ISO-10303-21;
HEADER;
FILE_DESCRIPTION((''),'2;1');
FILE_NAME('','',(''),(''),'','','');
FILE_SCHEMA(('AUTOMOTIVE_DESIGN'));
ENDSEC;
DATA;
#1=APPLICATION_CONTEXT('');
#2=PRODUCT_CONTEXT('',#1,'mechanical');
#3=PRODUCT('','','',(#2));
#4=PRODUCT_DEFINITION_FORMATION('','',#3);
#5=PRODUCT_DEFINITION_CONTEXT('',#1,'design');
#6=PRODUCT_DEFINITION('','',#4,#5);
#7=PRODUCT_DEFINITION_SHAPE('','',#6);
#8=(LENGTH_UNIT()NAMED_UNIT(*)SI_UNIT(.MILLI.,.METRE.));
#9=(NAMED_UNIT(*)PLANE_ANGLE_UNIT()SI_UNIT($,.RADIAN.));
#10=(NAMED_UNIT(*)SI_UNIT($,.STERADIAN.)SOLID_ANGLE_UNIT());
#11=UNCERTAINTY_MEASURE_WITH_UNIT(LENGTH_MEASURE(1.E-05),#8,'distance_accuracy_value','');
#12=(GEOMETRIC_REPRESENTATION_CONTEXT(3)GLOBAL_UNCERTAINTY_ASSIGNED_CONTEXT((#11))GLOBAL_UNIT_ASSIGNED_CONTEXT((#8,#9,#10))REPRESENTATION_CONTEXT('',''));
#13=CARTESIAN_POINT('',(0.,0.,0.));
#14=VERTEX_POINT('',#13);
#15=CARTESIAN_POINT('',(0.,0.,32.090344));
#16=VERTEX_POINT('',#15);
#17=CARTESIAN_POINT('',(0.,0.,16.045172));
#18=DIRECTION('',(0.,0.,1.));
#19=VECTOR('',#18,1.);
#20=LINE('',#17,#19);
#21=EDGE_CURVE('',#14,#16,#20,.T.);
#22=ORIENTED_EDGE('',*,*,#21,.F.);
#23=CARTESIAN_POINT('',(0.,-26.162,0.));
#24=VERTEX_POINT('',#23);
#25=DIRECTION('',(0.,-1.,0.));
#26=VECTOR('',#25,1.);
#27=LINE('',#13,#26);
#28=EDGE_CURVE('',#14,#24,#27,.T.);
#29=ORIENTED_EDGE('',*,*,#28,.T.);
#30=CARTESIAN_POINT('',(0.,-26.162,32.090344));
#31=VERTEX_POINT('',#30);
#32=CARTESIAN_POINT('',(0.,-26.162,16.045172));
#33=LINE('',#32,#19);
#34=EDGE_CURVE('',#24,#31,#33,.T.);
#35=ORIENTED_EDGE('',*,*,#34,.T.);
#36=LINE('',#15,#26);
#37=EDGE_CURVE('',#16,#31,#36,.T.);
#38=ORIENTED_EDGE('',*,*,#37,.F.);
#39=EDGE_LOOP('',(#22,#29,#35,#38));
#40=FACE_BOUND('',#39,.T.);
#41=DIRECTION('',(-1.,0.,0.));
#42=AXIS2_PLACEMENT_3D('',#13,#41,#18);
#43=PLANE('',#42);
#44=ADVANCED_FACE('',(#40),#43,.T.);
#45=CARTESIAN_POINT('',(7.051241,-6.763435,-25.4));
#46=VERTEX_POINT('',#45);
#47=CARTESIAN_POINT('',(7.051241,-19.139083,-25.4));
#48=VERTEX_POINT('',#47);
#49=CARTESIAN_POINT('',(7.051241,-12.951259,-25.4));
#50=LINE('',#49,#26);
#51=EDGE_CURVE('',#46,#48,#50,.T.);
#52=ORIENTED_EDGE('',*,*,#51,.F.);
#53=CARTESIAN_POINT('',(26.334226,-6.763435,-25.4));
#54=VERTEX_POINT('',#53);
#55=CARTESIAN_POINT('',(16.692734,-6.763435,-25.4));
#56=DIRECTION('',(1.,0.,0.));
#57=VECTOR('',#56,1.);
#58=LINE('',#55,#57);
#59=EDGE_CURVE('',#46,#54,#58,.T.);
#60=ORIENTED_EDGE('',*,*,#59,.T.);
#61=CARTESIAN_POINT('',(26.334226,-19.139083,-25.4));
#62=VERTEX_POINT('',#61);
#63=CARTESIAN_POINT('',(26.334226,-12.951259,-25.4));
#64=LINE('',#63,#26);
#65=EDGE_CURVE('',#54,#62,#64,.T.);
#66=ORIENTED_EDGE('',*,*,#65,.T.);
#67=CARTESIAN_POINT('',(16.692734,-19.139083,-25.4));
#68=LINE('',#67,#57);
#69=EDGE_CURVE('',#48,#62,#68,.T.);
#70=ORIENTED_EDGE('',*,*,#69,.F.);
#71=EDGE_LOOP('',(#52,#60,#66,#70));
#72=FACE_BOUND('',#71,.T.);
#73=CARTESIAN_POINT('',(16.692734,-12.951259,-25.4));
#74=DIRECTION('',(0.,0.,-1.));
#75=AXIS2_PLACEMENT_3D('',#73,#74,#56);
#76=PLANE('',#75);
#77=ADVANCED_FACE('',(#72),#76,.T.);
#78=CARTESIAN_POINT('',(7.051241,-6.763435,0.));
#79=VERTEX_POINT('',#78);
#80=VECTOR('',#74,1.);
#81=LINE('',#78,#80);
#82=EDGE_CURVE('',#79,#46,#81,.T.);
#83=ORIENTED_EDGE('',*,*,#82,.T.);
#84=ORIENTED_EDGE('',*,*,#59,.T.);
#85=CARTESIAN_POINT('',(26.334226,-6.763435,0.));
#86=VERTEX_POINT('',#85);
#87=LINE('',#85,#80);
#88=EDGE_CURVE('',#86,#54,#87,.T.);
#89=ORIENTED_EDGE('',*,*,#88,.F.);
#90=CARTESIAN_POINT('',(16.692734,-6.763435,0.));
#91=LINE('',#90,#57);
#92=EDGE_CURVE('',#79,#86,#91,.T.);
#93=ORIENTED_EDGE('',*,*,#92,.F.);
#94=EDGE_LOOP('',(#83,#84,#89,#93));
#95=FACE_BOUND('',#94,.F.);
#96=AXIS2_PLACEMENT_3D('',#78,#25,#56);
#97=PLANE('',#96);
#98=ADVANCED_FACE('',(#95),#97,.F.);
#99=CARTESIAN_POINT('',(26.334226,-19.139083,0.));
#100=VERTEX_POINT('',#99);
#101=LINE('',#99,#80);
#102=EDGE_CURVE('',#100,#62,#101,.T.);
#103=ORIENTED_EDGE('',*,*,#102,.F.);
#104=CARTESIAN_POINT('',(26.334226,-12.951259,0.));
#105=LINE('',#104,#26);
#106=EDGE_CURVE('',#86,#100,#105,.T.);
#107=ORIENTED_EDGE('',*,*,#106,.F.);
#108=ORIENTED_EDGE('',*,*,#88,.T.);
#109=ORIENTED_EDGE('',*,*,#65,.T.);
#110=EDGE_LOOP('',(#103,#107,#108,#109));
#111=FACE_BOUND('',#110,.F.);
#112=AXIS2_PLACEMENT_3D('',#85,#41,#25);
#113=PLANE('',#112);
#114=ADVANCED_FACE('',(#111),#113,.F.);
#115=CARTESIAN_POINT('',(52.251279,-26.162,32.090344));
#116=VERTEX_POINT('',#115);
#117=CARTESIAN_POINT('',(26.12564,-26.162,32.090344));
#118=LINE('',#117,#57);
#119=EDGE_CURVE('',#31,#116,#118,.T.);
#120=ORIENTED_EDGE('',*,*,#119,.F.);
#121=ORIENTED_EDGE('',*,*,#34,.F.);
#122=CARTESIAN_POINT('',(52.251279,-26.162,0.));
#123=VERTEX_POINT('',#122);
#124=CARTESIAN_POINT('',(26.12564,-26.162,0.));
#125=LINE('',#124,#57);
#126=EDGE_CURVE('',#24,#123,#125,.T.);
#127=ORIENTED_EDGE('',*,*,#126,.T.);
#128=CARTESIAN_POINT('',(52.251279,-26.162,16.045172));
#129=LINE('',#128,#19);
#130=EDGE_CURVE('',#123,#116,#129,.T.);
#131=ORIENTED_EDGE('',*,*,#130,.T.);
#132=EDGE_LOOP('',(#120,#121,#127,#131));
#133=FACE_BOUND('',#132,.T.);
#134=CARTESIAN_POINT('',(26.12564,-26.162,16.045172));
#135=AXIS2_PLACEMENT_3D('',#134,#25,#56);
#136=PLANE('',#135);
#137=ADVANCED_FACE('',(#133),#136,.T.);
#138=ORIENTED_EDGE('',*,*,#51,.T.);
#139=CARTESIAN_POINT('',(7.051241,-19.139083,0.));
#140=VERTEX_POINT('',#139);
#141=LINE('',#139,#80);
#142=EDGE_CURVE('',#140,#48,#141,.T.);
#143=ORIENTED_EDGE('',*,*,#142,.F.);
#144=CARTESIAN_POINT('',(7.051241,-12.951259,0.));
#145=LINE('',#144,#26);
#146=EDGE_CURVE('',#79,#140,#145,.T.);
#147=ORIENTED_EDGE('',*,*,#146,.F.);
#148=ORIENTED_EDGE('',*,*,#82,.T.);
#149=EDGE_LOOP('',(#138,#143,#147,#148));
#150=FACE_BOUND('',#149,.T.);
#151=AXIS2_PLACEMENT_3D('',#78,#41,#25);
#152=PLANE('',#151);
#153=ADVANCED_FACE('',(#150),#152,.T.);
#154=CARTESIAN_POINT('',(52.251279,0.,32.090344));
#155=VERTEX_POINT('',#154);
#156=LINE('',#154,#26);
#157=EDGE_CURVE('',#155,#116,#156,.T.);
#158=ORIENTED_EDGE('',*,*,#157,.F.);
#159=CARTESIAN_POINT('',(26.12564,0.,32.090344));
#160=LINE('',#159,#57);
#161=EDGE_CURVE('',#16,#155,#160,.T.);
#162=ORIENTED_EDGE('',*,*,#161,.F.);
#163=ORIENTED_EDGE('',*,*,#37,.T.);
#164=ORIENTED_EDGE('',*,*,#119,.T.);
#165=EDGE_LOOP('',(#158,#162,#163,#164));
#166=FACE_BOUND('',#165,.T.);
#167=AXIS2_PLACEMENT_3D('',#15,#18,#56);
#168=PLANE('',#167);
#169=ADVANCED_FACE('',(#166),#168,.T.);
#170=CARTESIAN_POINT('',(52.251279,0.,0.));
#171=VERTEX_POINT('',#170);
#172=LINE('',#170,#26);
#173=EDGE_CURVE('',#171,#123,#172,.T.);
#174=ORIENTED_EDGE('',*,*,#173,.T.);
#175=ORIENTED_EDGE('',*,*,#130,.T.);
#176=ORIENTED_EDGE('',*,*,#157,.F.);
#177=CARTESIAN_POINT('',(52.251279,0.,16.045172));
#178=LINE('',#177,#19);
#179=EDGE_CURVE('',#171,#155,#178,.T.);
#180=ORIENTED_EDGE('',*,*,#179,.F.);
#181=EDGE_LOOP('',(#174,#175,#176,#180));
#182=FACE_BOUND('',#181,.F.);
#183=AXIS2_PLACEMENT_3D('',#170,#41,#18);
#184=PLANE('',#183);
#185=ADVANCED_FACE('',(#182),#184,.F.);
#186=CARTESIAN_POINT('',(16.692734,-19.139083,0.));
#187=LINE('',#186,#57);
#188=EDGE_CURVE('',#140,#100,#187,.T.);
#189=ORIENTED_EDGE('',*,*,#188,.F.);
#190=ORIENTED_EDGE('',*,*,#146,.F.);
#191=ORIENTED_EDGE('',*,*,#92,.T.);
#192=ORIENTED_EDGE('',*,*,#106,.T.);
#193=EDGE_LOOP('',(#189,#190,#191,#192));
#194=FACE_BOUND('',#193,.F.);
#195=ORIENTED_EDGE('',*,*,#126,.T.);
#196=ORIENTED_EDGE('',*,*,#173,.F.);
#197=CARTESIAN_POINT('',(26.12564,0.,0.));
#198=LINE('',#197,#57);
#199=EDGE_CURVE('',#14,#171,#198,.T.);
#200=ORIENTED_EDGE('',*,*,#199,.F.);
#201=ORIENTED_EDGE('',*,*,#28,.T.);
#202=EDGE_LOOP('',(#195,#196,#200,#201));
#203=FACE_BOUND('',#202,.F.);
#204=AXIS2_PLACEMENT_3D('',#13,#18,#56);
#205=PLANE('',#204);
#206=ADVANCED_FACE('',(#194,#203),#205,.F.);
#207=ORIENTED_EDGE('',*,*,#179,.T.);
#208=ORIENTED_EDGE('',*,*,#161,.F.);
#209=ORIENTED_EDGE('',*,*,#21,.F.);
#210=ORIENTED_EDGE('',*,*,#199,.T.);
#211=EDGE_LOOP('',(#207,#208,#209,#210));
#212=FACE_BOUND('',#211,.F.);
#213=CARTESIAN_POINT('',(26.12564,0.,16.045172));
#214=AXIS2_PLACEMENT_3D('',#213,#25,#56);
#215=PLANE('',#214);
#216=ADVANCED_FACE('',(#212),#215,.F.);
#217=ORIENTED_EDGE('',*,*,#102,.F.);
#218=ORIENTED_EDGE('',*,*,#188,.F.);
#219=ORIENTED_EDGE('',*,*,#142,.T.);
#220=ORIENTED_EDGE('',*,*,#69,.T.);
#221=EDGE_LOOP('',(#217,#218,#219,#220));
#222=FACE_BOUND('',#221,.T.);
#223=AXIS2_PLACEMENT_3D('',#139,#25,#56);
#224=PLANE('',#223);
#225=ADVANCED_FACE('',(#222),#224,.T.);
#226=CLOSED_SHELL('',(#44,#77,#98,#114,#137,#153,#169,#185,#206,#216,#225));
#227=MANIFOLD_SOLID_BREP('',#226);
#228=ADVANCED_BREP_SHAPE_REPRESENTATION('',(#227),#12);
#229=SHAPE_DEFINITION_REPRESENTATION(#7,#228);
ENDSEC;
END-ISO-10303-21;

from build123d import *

# Parameters (mm, degrees)
F0_W     = 52.2512793541
F0_H     = 32.0903435349
F1_DEPTH = 26.162
F2_W     = 19.282985013
F2_H     = 12.3756476678
F3_DEPTH = 25.4


# Not quite as in the source:
# - a feature names something its author has since deleted; it is built from what else it names


with BuildPart() as f1:
    # F0 (on Front) → F1 (new body)
    with BuildSketch(Plane.XZ):
        with Locations((26.125639677, 16.0451717675)):
            Rectangle(F0_W, F0_H)
    extrude(amount=F1_DEPTH)

    # F2 (on face) → F3 (join)
    with BuildSketch(Plane(origin=(0, 0, 0), x_dir=(1, 0, 0), z_dir=(0, 0, -1))):
        with Locations((16.692733625, 12.9512592684)):
            Rectangle(F2_W, F2_H)
    extrude(amount=F3_DEPTH)


solid = f1.part
